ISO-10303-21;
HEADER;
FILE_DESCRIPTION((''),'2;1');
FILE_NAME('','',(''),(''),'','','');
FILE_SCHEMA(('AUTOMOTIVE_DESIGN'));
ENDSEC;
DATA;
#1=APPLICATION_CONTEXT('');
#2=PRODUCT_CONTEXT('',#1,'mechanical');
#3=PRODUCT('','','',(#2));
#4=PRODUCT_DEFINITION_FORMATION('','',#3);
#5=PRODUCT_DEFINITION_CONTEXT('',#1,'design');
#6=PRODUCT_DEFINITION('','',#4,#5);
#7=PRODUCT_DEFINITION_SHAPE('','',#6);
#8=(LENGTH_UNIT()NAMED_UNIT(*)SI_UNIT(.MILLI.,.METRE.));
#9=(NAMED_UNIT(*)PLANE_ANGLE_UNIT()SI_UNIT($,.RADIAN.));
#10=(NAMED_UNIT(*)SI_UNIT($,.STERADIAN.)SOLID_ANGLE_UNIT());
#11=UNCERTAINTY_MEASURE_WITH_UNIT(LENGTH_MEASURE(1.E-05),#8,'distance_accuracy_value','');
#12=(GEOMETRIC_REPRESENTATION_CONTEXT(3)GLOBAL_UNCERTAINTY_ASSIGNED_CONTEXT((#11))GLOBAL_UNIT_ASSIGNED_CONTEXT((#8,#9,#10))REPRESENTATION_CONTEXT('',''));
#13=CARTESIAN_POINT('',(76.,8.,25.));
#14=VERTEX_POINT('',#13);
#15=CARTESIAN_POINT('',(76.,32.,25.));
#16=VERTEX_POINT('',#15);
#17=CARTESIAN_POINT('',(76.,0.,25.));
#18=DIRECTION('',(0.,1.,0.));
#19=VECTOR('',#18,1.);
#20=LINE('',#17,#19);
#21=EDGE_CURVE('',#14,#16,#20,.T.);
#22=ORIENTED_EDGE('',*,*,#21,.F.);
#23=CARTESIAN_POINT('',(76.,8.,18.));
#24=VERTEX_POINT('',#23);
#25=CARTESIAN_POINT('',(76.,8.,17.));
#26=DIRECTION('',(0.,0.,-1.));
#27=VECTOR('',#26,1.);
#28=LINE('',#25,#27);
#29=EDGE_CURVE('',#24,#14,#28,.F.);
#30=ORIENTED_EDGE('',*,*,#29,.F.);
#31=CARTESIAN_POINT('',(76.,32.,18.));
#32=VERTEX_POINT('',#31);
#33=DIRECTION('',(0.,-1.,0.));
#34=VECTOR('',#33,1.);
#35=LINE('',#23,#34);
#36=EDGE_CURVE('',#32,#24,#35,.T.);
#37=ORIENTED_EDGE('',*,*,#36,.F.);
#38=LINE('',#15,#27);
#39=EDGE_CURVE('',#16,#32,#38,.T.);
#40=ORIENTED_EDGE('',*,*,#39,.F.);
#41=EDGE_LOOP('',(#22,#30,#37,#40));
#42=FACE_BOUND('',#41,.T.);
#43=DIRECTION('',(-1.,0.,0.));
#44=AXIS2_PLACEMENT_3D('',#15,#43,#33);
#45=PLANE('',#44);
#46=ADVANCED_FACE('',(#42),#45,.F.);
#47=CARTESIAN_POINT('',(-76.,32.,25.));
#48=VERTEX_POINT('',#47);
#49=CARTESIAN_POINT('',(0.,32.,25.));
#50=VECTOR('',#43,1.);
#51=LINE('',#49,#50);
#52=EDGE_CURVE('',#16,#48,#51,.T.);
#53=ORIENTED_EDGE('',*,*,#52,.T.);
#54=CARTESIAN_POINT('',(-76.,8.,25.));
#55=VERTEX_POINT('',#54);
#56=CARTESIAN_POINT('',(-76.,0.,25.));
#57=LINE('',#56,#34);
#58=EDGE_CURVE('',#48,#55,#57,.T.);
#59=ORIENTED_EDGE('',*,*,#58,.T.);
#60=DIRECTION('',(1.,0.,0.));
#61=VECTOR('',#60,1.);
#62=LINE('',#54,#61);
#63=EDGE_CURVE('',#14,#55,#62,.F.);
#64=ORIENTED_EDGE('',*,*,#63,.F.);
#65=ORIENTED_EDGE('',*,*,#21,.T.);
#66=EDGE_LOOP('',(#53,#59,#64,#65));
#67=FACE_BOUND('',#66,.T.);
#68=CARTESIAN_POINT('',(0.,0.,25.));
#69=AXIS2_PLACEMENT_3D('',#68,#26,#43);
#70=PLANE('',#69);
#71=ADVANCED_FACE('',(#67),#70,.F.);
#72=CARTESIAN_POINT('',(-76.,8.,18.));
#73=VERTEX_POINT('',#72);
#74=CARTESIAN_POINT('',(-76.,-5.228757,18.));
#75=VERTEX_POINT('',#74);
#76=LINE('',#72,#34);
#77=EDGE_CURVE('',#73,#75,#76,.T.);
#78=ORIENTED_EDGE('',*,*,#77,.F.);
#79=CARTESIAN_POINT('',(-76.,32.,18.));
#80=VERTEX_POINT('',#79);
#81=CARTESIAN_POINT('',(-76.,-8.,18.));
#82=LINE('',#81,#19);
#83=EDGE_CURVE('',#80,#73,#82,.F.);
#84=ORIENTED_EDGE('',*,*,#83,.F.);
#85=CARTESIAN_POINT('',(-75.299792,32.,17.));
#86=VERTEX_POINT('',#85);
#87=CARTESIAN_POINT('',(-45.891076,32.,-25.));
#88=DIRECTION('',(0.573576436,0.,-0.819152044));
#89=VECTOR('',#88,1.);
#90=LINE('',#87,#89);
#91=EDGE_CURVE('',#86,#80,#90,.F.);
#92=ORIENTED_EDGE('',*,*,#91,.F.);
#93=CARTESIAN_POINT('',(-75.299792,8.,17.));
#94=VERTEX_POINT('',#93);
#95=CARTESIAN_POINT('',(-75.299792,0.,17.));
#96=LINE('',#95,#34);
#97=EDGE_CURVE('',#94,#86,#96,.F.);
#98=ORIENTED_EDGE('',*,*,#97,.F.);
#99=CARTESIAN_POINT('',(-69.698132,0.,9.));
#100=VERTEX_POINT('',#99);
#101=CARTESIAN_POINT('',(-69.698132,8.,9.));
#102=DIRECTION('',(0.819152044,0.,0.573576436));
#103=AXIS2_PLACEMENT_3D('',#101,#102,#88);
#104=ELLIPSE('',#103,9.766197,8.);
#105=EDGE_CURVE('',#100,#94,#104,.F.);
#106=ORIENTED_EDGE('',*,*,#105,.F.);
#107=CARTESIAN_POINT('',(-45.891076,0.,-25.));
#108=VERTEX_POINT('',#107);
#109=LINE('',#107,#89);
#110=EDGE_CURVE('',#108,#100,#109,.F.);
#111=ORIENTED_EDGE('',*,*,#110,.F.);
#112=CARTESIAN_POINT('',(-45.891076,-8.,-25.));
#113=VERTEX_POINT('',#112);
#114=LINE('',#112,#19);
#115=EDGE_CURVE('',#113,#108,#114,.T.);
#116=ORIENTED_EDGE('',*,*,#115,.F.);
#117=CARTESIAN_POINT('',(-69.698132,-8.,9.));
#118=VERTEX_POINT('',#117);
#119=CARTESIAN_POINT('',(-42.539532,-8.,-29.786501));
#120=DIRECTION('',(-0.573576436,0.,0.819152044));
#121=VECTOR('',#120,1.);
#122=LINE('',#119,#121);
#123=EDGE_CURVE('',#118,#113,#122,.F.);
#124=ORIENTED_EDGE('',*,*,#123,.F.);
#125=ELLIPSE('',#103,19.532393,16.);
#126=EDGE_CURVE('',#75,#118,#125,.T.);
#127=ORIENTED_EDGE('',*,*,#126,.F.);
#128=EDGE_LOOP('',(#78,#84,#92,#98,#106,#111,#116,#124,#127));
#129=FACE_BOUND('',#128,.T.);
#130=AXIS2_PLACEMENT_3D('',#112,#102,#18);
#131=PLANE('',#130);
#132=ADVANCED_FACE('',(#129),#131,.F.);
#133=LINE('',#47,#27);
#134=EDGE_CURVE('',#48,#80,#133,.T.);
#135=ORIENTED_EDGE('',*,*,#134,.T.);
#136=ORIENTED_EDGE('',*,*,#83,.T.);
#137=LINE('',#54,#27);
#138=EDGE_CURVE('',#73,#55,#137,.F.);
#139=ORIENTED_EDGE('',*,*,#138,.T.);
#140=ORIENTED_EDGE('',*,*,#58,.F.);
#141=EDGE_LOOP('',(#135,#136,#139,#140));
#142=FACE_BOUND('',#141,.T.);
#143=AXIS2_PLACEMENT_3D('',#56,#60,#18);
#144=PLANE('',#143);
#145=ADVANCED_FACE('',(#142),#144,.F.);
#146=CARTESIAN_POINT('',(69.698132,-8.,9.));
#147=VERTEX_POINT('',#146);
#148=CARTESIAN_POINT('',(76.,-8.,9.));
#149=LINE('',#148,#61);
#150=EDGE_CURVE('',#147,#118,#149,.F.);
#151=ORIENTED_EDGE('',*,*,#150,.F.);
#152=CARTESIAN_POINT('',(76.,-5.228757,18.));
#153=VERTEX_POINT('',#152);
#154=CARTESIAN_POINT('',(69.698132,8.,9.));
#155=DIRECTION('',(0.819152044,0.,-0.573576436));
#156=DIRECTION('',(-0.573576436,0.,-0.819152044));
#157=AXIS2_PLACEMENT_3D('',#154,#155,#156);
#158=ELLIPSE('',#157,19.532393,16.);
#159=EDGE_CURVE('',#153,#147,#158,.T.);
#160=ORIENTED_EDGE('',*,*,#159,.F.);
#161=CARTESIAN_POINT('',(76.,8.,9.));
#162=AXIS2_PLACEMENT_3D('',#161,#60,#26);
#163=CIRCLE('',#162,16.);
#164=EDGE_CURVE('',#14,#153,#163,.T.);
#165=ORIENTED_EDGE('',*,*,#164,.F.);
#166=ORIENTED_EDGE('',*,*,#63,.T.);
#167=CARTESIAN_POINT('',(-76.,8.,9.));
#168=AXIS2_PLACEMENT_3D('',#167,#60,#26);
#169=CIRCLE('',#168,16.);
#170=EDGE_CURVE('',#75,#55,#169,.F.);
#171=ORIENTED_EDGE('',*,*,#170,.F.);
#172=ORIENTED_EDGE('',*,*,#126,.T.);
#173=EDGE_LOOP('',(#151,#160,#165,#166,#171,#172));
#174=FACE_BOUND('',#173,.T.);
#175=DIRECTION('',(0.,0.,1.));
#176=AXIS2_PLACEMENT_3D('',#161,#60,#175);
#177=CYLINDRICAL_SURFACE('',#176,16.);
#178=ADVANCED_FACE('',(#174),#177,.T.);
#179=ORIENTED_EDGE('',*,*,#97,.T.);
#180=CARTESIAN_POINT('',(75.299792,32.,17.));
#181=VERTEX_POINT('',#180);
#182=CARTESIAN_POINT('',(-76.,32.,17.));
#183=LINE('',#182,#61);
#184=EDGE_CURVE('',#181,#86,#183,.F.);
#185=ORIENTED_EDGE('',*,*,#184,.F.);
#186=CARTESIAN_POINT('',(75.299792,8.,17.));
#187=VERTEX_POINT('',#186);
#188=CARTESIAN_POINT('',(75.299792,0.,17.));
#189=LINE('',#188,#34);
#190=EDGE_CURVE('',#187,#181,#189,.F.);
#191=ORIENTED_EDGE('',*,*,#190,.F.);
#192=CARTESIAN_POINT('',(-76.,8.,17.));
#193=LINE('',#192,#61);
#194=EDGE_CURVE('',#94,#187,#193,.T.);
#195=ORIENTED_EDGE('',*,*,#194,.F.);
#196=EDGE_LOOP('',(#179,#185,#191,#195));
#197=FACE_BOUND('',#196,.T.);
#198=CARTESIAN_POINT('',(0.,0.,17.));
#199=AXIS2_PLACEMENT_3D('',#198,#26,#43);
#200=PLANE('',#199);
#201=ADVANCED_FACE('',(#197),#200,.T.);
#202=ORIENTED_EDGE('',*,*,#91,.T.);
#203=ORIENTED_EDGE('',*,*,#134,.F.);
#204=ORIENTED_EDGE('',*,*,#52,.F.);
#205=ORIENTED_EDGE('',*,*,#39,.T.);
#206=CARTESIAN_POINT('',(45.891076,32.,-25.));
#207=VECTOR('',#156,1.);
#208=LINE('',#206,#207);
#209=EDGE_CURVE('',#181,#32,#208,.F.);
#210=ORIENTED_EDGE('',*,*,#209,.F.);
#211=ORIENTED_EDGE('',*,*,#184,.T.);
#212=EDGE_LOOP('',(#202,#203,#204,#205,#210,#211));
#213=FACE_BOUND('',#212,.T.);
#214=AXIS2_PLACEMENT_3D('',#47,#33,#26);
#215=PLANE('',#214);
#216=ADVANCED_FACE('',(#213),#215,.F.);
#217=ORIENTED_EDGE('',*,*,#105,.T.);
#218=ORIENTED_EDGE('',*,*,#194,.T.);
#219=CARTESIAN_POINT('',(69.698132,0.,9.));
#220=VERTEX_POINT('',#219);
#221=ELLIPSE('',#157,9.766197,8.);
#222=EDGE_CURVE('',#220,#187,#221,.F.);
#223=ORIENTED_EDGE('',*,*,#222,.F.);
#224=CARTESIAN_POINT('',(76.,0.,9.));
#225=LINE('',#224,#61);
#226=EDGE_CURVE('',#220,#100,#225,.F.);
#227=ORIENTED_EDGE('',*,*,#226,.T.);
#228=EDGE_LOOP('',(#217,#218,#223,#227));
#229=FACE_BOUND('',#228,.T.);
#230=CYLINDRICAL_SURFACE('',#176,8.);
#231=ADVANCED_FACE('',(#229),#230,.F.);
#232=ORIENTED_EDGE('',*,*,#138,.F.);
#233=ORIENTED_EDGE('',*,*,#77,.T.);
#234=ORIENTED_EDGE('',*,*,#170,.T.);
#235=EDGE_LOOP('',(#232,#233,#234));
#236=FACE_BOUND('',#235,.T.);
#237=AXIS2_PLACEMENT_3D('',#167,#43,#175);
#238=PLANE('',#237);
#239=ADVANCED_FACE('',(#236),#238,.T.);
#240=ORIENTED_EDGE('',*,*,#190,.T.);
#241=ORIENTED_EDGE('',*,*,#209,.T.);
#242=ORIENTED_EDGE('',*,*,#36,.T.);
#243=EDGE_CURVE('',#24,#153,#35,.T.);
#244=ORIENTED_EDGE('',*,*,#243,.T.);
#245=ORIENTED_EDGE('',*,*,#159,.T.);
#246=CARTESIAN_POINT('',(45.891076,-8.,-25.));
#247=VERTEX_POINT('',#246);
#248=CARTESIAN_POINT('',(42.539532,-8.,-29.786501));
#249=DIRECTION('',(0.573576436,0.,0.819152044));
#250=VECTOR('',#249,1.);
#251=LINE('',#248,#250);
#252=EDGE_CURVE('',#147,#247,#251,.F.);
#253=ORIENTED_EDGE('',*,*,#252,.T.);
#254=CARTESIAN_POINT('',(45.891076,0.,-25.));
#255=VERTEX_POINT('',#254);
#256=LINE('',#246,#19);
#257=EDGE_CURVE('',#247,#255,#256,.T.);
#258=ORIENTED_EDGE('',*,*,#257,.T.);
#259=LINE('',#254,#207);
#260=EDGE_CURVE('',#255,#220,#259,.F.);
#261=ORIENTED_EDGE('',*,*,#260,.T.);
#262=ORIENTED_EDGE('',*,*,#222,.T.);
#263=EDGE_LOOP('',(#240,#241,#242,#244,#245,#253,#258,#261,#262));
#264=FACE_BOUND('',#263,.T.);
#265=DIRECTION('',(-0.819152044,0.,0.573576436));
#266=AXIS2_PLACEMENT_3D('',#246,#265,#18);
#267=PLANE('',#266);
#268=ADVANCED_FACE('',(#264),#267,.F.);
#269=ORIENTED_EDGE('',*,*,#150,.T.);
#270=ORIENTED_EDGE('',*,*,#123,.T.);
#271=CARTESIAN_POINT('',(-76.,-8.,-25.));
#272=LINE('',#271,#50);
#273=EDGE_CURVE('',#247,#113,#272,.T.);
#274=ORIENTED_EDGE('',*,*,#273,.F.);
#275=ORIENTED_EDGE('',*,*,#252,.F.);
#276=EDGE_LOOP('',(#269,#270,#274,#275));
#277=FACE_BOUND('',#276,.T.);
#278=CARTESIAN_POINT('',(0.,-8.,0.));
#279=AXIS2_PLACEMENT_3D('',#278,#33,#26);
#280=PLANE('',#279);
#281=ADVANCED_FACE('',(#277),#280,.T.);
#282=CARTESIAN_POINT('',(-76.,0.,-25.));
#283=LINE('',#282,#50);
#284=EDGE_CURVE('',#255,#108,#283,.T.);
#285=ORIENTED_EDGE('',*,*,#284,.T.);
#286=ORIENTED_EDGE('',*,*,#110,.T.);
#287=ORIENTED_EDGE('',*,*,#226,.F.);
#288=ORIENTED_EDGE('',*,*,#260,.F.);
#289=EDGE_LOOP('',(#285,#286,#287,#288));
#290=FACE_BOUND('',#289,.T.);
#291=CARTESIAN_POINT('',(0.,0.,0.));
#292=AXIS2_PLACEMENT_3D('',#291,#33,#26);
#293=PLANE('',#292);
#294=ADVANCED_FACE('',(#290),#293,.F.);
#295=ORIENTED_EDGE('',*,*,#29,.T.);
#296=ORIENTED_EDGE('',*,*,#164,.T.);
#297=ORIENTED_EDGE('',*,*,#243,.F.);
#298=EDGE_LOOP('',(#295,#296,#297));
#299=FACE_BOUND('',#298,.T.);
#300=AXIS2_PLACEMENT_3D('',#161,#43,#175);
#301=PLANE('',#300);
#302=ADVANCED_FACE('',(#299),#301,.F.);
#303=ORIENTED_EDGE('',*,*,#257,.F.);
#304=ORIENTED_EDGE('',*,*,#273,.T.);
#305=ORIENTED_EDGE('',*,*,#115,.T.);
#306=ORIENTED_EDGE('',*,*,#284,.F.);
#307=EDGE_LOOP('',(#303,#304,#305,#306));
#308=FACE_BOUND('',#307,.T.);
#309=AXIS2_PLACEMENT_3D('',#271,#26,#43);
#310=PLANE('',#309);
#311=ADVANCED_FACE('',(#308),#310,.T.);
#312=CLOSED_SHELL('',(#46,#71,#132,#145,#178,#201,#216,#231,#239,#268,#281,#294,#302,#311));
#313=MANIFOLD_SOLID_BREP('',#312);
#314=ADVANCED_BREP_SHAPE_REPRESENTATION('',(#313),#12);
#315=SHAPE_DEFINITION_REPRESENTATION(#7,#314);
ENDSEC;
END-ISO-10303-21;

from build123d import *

# Parameters (mm, degrees)
SKETCH1_W                    = 152
SKETCH1_H                    = 50
BASE_FLANGE1_DEPTH           = 8
EDGE_FLANGE1_STRIP_W         = 48
EDGE_FLANGE1_STRIP_H         = 8
EDGE_FLANGE1_STRIP_CUT_DEPTH = 152
EDGE_FLANGE1_DEPTH           = 152
CHAMFER1_SIZE                = 43
CHAMFER1_SIZE2               = 30.108924143
MIRROR3_START                = 51.931179512
MIRROR3_OUTLINE_W            = 56
MIRROR3_OUTLINE_H            = 41
MIRROR3_DEPTH                = 24.663786763


# Read off the part's stored shape, not the designer's step: Mirror3
# Sheet-metal steps are written as plain solids
with BuildPart() as part:
    # Sketch1 → Base-Flange1 (new body)
    with BuildSketch(Plane(origin=(0, 0, 0), x_dir=(1, 0, 0), z_dir=(0, 1, 0))):
        Rectangle(SKETCH1_W, SKETCH1_H)
    extrude(amount=-BASE_FLANGE1_DEPTH)

    # Edge-Flange1 strip (across the edge) → Edge-Flange1 strip cut (cut)
    with BuildSketch(Plane(origin=(-76, 0, 25), x_dir=(0, 0, -1), z_dir=(1, 0, 0))):
        with Locations((-8, -4)):
            Rectangle(EDGE_FLANGE1_STRIP_W, EDGE_FLANGE1_STRIP_H)
    extrude(amount=EDGE_FLANGE1_STRIP_CUT_DEPTH, mode=Mode.SUBTRACT)

    # Edge-Flange1 section (across the edge) → Edge-Flange1 (add)
    with BuildSketch(Plane(origin=(-76, 0, 25), x_dir=(0, 0, -1), z_dir=(1, 0, 0))):
        with BuildLine():
            Line((0, 8), (0, 32))
            Line((0, 32), (8, 32))
            Line((8, 32), (8, 8))
            ThreePointArc((8, 8), (10.343145751, 2.343145751), (16, 0))
            Line((16, 0), (16, -8))
            ThreePointArc((16, -8), (4.686291501, -3.313708499), (0, 8))
        make_face()
    extrude(amount=EDGE_FLANGE1_DEPTH)

    # Chamfer1
    chamfer1_edges = [part.edges().sort_by_distance(p)[0] for p in [
        (-76, -4, -25),
    ]]
    chamfer1_side = [part.faces().sort_by_distance(p)[0] for p in [
        (-76, -0.640312424, -8),
    ]]
    chamfer(chamfer1_edges, length=CHAMFER1_SIZE, length2=CHAMFER1_SIZE2, reference=chamfer1_side[0])

    # Mirror3 outline → Mirror3 (cut)
    with BuildSketch(Plane(origin=(0, 0, 0), x_dir=(0.5735764363510512, 0, 0.8191520442889882), z_dir=(0.8191520442889882, 0, -0.5735764363510512)).offset(MIRROR3_START)):
        with Locations((32, -12.5)):
            Rectangle(MIRROR3_OUTLINE_W, MIRROR3_OUTLINE_H)
    extrude(amount=MIRROR3_DEPTH, mode=Mode.SUBTRACT)


solid = part.part
